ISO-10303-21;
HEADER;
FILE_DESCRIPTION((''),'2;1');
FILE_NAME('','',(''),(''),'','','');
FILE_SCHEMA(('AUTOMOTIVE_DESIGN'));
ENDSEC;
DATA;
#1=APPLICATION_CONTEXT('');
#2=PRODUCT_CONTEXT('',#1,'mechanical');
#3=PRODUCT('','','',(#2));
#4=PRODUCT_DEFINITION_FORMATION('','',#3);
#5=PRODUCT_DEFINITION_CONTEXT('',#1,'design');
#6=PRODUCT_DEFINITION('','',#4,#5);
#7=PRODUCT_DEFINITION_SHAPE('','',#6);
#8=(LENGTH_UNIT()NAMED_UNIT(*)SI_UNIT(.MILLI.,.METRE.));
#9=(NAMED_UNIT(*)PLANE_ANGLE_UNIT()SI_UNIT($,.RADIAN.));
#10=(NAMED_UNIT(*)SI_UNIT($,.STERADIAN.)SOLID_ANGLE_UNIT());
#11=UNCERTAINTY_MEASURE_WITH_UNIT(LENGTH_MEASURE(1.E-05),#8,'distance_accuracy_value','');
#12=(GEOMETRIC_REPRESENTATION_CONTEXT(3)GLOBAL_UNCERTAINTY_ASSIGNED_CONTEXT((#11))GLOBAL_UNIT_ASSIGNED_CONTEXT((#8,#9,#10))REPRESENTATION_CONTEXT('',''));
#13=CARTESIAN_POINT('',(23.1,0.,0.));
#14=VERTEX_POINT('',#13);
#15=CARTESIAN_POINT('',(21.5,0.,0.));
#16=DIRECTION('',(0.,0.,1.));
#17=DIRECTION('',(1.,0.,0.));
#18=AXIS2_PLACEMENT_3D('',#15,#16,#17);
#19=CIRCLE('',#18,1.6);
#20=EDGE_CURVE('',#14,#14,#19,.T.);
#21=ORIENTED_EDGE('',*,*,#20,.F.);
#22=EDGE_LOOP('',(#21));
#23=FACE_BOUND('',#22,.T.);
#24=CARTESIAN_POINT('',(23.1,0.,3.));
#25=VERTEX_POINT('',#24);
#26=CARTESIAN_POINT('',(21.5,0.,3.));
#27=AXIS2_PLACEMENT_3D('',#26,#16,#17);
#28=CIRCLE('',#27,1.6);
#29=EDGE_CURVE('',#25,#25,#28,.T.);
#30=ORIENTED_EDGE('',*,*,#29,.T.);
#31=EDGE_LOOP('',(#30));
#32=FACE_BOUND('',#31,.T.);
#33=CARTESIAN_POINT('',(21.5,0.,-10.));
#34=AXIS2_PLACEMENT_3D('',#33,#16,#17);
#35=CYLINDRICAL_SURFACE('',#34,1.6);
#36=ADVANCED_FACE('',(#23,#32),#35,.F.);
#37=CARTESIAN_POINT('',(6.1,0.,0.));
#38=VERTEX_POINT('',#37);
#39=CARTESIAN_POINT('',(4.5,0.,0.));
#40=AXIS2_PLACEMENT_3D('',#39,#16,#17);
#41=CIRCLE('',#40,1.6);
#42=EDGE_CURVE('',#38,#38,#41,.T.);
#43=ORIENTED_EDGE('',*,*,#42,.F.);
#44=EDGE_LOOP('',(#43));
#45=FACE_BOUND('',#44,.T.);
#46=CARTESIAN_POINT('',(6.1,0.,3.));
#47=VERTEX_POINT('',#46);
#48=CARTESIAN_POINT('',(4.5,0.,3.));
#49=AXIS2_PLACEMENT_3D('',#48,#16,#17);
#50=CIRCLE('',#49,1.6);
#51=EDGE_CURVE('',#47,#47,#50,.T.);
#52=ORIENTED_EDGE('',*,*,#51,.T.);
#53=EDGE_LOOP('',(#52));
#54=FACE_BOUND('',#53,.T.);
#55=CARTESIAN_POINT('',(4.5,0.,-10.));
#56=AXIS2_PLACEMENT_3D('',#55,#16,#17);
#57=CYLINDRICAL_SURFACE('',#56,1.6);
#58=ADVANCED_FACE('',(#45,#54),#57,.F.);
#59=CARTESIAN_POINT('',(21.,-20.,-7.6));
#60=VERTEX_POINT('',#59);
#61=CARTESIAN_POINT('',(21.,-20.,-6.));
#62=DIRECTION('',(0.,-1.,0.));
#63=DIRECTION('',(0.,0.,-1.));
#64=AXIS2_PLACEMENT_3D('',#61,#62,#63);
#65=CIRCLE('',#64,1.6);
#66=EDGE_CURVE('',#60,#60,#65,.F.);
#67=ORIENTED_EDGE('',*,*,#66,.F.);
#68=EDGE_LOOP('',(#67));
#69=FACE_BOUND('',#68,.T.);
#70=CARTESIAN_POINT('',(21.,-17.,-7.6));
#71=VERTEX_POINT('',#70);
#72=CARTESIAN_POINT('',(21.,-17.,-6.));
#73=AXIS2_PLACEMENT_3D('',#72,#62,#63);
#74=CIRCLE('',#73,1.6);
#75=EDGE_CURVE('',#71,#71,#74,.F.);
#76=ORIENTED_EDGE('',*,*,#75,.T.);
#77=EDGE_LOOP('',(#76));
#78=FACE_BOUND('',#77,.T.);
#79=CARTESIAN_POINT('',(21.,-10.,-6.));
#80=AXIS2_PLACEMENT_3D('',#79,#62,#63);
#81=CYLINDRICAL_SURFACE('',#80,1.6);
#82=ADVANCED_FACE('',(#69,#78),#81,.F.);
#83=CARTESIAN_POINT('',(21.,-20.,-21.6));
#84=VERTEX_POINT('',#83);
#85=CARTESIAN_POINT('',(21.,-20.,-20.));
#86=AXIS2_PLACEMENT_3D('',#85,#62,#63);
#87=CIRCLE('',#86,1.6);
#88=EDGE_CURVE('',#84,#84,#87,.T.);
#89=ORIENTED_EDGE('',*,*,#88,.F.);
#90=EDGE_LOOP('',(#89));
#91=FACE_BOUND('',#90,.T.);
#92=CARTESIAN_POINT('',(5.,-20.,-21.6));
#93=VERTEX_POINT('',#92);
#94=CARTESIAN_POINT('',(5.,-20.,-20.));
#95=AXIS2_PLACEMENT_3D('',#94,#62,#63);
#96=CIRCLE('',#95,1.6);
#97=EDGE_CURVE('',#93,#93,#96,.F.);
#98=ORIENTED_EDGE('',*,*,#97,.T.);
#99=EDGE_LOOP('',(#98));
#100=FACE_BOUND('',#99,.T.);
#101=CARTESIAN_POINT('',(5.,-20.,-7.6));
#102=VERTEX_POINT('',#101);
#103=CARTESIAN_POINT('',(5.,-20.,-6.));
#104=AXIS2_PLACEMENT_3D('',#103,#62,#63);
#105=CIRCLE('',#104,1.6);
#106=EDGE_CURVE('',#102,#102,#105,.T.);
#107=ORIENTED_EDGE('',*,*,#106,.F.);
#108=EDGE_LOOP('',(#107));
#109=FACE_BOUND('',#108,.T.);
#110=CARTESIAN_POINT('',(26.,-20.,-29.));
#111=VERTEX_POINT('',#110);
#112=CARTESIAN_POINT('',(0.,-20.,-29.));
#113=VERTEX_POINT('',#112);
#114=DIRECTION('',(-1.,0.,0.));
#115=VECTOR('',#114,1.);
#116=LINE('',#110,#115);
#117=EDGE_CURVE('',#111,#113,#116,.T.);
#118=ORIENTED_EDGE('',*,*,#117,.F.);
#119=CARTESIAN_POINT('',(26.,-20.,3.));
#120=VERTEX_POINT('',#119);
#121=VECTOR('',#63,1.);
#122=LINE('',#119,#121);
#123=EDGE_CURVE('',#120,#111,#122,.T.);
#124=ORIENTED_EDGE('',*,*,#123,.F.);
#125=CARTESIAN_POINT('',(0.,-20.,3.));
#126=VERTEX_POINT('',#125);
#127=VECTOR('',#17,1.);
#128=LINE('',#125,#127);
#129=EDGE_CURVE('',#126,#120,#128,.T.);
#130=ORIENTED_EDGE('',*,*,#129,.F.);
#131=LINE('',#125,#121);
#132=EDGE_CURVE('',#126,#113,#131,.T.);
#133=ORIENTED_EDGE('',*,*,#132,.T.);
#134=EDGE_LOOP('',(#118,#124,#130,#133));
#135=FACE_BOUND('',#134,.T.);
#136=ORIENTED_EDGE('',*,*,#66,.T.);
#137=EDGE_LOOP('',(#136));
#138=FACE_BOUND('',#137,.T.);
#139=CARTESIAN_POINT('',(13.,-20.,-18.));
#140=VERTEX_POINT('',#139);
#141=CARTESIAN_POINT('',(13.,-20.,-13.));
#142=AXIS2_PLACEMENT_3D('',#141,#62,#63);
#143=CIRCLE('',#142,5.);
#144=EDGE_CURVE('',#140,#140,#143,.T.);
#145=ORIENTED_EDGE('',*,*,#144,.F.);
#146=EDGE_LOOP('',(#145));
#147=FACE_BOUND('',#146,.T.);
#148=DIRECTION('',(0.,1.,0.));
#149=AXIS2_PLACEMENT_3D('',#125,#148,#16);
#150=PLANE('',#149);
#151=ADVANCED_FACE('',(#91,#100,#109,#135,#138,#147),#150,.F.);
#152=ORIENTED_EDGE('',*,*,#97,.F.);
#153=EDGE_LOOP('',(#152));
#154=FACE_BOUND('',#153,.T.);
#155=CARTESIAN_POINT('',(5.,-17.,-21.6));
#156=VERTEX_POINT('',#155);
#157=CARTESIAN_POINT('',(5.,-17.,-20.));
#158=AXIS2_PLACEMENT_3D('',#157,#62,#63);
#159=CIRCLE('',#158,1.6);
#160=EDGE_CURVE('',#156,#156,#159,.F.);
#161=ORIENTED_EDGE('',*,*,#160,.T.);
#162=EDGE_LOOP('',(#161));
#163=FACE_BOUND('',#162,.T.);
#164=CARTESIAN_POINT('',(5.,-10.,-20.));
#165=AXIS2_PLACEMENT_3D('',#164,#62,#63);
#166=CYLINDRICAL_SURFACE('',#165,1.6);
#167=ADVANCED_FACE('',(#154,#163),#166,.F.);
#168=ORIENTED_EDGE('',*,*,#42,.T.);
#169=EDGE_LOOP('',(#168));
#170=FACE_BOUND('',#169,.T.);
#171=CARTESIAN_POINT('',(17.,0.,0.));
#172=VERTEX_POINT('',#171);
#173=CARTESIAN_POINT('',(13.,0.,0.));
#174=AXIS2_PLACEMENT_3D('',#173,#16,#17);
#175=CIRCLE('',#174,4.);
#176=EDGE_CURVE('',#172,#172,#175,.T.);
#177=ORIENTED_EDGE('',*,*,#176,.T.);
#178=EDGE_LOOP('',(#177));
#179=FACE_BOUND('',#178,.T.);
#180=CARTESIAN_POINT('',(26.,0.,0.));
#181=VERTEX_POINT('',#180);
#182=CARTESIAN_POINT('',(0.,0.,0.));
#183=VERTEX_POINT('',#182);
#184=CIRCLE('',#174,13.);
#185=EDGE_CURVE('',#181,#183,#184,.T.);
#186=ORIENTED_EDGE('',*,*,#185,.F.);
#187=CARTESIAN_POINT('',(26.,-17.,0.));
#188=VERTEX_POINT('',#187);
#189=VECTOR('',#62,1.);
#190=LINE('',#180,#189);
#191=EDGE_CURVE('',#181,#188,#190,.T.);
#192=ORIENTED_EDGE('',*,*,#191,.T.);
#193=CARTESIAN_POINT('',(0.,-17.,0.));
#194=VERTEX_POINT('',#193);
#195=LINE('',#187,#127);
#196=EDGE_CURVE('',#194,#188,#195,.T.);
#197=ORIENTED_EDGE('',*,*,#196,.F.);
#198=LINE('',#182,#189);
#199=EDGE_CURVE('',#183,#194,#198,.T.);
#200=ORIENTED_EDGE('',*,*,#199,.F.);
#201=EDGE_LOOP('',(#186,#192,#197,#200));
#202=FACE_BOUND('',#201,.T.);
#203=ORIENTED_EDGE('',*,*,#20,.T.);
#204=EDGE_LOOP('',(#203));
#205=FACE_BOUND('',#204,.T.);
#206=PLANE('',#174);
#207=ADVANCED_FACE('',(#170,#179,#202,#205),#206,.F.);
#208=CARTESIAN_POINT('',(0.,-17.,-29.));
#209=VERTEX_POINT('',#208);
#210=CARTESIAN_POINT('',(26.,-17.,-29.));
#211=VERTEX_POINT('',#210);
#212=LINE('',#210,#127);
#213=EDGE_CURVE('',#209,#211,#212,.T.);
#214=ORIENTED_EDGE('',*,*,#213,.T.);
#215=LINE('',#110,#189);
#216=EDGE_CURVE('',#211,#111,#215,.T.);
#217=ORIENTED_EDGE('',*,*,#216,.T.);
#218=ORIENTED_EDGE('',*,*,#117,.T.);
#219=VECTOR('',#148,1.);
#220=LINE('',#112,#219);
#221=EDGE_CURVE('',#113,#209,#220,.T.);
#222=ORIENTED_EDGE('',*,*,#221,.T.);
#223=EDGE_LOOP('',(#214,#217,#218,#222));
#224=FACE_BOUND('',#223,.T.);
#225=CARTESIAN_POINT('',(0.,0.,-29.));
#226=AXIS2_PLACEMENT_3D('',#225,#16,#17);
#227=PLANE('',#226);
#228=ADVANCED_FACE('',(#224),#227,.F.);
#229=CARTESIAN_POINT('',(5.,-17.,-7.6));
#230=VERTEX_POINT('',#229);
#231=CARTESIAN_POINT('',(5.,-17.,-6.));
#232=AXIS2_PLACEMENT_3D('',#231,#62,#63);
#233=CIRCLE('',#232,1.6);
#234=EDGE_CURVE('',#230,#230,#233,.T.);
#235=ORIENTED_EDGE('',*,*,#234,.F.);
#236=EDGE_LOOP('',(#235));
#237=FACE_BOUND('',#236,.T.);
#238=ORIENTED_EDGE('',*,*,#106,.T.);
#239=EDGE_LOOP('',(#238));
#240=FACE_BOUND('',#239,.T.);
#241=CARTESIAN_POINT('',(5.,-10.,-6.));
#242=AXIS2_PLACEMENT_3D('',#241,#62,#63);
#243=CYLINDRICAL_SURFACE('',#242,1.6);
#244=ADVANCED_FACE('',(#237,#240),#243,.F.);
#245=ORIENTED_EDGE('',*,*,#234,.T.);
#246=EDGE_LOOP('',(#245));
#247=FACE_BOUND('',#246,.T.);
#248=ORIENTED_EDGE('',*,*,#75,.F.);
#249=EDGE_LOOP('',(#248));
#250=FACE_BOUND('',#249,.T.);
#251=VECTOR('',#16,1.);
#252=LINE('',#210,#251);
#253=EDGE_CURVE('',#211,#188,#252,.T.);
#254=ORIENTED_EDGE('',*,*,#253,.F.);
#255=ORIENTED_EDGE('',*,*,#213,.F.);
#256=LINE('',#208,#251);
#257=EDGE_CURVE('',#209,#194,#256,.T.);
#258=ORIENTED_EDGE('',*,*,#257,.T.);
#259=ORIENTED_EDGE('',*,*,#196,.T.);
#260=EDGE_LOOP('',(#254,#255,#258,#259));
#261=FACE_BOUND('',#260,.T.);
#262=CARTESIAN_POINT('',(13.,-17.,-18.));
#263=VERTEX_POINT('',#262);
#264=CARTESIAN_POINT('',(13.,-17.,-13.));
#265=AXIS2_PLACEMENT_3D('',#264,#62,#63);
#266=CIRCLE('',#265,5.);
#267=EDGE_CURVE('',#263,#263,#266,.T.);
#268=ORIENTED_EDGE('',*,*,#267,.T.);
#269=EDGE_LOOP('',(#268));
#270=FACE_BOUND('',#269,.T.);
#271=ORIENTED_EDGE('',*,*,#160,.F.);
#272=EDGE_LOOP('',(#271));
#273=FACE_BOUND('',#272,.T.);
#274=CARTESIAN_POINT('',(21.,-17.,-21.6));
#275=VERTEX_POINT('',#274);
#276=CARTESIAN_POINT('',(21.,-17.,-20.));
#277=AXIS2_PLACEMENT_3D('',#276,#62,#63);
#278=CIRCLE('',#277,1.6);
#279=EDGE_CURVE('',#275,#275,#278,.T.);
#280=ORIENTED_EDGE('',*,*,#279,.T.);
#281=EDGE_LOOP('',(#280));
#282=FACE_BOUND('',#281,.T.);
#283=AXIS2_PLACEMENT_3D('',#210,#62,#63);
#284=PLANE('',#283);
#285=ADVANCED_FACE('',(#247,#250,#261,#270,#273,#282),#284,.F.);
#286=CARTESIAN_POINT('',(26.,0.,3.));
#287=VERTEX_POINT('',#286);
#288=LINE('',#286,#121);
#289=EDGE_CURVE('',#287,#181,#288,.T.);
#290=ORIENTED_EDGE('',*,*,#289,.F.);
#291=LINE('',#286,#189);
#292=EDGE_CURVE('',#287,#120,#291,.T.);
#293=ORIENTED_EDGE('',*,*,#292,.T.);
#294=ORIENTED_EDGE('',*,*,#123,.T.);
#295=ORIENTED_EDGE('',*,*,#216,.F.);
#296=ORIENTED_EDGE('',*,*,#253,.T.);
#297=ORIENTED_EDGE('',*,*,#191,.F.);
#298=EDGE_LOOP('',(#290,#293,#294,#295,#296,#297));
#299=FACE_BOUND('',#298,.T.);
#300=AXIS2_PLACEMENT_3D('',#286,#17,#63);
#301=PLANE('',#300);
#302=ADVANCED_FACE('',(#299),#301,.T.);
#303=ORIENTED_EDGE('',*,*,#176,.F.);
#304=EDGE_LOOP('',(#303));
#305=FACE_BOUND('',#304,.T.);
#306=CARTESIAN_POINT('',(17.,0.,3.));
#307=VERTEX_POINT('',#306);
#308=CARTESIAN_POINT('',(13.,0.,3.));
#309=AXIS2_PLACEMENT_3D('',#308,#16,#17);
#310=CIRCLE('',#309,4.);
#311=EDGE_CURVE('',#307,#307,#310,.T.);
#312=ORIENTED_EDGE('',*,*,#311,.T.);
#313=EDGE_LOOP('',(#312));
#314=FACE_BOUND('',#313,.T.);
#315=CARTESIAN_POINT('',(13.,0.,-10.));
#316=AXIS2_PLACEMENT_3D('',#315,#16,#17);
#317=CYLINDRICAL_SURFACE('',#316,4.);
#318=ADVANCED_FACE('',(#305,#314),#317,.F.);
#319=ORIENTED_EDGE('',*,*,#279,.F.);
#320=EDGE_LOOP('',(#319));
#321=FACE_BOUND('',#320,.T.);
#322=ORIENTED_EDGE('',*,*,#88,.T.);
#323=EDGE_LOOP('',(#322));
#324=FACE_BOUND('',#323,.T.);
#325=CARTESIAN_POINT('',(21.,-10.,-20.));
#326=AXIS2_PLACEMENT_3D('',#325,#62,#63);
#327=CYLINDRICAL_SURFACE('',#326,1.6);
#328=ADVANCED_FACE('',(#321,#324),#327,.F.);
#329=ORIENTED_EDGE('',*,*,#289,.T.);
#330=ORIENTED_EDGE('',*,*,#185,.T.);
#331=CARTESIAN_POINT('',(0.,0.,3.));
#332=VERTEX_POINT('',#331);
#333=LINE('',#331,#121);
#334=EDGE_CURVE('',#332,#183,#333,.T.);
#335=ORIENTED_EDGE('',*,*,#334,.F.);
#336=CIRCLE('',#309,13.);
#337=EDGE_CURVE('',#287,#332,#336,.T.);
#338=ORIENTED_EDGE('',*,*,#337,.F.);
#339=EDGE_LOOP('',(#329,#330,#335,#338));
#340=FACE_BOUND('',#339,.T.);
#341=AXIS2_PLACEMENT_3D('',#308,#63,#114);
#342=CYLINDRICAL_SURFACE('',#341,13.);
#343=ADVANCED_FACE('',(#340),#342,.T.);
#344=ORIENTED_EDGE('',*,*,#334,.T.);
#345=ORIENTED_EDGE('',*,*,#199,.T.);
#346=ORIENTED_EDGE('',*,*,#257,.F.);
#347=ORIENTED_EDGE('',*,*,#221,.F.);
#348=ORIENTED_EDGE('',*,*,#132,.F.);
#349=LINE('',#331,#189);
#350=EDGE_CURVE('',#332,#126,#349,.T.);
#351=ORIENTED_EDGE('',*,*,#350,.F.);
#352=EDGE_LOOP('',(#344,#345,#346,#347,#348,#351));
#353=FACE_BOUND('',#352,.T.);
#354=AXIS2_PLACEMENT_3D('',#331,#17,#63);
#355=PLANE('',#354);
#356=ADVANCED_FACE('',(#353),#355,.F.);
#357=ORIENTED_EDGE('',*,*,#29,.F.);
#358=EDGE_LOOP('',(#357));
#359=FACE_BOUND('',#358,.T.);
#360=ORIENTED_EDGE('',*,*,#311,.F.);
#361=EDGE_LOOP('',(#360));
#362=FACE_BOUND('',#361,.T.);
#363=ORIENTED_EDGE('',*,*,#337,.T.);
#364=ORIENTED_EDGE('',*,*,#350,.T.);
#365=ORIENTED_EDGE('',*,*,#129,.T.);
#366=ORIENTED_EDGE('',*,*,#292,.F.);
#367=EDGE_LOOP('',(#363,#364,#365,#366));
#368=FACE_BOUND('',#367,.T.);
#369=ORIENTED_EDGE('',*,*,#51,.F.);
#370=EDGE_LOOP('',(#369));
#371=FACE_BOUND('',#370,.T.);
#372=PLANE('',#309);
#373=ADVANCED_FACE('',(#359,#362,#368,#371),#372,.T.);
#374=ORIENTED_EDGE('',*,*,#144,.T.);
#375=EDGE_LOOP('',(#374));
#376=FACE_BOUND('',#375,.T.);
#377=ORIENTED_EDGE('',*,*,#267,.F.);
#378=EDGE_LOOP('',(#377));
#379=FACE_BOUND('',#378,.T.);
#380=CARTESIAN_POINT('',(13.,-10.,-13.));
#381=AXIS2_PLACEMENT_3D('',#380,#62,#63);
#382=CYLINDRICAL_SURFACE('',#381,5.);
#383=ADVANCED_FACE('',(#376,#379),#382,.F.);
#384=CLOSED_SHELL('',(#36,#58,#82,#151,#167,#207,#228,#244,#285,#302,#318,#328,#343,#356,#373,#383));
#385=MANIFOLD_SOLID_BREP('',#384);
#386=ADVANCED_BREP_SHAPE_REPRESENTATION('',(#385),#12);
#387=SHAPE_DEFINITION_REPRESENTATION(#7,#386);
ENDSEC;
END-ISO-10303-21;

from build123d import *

# Parameters (mm, degrees)
BOSS_EXTRUDE1_DEPTH      = 3
SKETCH2_R                = 4
SKETCH2_R_2              = 1.6
CUT_EXTRUDE1_DEPTH       = 13
SKETCH3_W                = 26
SKETCH3_H                = 3
BOSS_EXTRUDE2_DEPTH      = 29
CUT_EXTRUDE3_START       = -20
CUT_EXTRUDE3_OUTLINE_R   = 1.6
CUT_EXTRUDE3_OUTLINE_R_2 = 5
CUT_EXTRUDE3_DEPTH       = 3


# Read off the part's stored shape, not the designer's step: Cut-Extrude3
with BuildPart() as part:
    # Sketch1 → Boss-Extrude1 (new body)
    with BuildSketch(Plane.XY):
        with BuildLine():
            Line((0, 0), (0, -20))
            Line((0, -20), (26, -20))
            Line((26, -20), (26, 0))
            ThreePointArc((26, 0), (13, 13), (0, 0))
        make_face()
    extrude(amount=BOSS_EXTRUDE1_DEPTH)

    # Sketch2 → Cut-Extrude1 (cut)
    with BuildSketch(Plane.XY.offset(3)):
        with Locations((13, 0)):
            Circle(SKETCH2_R)
        with Locations((4.5, 0)):
            Circle(SKETCH2_R_2)
        with Locations((21.5, 0)):
            Circle(SKETCH2_R_2)
    extrude(amount=-CUT_EXTRUDE1_DEPTH, mode=Mode.SUBTRACT)

    # Sketch3 → Boss-Extrude2 (add)
    with BuildSketch(Plane(origin=(0, 0, 0), x_dir=(-1, 0, 0), z_dir=(0, 0, -1))):
        with Locations((-13, -18.5)):
            Rectangle(SKETCH3_W, SKETCH3_H)
    extrude(amount=BOSS_EXTRUDE2_DEPTH)

    # Cut-Extrude3 outline → Cut-Extrude3 (cut)
    with BuildSketch(Plane(origin=(0, 0, 0), x_dir=(1, 0, 0), z_dir=(0, 1, 0)).offset(CUT_EXTRUDE3_START)):
        with Locations((5, 20)):
            Circle(CUT_EXTRUDE3_OUTLINE_R)
        with Locations((21, 6)):
            Circle(CUT_EXTRUDE3_OUTLINE_R)
        with Locations((21, 20)):
            Circle(CUT_EXTRUDE3_OUTLINE_R)
        with Locations((13, 13)):
            Circle(CUT_EXTRUDE3_OUTLINE_R_2)
        with Locations((5, 6)):
            Circle(CUT_EXTRUDE3_OUTLINE_R)
    extrude(amount=CUT_EXTRUDE3_DEPTH, mode=Mode.SUBTRACT)


solid = part.part
